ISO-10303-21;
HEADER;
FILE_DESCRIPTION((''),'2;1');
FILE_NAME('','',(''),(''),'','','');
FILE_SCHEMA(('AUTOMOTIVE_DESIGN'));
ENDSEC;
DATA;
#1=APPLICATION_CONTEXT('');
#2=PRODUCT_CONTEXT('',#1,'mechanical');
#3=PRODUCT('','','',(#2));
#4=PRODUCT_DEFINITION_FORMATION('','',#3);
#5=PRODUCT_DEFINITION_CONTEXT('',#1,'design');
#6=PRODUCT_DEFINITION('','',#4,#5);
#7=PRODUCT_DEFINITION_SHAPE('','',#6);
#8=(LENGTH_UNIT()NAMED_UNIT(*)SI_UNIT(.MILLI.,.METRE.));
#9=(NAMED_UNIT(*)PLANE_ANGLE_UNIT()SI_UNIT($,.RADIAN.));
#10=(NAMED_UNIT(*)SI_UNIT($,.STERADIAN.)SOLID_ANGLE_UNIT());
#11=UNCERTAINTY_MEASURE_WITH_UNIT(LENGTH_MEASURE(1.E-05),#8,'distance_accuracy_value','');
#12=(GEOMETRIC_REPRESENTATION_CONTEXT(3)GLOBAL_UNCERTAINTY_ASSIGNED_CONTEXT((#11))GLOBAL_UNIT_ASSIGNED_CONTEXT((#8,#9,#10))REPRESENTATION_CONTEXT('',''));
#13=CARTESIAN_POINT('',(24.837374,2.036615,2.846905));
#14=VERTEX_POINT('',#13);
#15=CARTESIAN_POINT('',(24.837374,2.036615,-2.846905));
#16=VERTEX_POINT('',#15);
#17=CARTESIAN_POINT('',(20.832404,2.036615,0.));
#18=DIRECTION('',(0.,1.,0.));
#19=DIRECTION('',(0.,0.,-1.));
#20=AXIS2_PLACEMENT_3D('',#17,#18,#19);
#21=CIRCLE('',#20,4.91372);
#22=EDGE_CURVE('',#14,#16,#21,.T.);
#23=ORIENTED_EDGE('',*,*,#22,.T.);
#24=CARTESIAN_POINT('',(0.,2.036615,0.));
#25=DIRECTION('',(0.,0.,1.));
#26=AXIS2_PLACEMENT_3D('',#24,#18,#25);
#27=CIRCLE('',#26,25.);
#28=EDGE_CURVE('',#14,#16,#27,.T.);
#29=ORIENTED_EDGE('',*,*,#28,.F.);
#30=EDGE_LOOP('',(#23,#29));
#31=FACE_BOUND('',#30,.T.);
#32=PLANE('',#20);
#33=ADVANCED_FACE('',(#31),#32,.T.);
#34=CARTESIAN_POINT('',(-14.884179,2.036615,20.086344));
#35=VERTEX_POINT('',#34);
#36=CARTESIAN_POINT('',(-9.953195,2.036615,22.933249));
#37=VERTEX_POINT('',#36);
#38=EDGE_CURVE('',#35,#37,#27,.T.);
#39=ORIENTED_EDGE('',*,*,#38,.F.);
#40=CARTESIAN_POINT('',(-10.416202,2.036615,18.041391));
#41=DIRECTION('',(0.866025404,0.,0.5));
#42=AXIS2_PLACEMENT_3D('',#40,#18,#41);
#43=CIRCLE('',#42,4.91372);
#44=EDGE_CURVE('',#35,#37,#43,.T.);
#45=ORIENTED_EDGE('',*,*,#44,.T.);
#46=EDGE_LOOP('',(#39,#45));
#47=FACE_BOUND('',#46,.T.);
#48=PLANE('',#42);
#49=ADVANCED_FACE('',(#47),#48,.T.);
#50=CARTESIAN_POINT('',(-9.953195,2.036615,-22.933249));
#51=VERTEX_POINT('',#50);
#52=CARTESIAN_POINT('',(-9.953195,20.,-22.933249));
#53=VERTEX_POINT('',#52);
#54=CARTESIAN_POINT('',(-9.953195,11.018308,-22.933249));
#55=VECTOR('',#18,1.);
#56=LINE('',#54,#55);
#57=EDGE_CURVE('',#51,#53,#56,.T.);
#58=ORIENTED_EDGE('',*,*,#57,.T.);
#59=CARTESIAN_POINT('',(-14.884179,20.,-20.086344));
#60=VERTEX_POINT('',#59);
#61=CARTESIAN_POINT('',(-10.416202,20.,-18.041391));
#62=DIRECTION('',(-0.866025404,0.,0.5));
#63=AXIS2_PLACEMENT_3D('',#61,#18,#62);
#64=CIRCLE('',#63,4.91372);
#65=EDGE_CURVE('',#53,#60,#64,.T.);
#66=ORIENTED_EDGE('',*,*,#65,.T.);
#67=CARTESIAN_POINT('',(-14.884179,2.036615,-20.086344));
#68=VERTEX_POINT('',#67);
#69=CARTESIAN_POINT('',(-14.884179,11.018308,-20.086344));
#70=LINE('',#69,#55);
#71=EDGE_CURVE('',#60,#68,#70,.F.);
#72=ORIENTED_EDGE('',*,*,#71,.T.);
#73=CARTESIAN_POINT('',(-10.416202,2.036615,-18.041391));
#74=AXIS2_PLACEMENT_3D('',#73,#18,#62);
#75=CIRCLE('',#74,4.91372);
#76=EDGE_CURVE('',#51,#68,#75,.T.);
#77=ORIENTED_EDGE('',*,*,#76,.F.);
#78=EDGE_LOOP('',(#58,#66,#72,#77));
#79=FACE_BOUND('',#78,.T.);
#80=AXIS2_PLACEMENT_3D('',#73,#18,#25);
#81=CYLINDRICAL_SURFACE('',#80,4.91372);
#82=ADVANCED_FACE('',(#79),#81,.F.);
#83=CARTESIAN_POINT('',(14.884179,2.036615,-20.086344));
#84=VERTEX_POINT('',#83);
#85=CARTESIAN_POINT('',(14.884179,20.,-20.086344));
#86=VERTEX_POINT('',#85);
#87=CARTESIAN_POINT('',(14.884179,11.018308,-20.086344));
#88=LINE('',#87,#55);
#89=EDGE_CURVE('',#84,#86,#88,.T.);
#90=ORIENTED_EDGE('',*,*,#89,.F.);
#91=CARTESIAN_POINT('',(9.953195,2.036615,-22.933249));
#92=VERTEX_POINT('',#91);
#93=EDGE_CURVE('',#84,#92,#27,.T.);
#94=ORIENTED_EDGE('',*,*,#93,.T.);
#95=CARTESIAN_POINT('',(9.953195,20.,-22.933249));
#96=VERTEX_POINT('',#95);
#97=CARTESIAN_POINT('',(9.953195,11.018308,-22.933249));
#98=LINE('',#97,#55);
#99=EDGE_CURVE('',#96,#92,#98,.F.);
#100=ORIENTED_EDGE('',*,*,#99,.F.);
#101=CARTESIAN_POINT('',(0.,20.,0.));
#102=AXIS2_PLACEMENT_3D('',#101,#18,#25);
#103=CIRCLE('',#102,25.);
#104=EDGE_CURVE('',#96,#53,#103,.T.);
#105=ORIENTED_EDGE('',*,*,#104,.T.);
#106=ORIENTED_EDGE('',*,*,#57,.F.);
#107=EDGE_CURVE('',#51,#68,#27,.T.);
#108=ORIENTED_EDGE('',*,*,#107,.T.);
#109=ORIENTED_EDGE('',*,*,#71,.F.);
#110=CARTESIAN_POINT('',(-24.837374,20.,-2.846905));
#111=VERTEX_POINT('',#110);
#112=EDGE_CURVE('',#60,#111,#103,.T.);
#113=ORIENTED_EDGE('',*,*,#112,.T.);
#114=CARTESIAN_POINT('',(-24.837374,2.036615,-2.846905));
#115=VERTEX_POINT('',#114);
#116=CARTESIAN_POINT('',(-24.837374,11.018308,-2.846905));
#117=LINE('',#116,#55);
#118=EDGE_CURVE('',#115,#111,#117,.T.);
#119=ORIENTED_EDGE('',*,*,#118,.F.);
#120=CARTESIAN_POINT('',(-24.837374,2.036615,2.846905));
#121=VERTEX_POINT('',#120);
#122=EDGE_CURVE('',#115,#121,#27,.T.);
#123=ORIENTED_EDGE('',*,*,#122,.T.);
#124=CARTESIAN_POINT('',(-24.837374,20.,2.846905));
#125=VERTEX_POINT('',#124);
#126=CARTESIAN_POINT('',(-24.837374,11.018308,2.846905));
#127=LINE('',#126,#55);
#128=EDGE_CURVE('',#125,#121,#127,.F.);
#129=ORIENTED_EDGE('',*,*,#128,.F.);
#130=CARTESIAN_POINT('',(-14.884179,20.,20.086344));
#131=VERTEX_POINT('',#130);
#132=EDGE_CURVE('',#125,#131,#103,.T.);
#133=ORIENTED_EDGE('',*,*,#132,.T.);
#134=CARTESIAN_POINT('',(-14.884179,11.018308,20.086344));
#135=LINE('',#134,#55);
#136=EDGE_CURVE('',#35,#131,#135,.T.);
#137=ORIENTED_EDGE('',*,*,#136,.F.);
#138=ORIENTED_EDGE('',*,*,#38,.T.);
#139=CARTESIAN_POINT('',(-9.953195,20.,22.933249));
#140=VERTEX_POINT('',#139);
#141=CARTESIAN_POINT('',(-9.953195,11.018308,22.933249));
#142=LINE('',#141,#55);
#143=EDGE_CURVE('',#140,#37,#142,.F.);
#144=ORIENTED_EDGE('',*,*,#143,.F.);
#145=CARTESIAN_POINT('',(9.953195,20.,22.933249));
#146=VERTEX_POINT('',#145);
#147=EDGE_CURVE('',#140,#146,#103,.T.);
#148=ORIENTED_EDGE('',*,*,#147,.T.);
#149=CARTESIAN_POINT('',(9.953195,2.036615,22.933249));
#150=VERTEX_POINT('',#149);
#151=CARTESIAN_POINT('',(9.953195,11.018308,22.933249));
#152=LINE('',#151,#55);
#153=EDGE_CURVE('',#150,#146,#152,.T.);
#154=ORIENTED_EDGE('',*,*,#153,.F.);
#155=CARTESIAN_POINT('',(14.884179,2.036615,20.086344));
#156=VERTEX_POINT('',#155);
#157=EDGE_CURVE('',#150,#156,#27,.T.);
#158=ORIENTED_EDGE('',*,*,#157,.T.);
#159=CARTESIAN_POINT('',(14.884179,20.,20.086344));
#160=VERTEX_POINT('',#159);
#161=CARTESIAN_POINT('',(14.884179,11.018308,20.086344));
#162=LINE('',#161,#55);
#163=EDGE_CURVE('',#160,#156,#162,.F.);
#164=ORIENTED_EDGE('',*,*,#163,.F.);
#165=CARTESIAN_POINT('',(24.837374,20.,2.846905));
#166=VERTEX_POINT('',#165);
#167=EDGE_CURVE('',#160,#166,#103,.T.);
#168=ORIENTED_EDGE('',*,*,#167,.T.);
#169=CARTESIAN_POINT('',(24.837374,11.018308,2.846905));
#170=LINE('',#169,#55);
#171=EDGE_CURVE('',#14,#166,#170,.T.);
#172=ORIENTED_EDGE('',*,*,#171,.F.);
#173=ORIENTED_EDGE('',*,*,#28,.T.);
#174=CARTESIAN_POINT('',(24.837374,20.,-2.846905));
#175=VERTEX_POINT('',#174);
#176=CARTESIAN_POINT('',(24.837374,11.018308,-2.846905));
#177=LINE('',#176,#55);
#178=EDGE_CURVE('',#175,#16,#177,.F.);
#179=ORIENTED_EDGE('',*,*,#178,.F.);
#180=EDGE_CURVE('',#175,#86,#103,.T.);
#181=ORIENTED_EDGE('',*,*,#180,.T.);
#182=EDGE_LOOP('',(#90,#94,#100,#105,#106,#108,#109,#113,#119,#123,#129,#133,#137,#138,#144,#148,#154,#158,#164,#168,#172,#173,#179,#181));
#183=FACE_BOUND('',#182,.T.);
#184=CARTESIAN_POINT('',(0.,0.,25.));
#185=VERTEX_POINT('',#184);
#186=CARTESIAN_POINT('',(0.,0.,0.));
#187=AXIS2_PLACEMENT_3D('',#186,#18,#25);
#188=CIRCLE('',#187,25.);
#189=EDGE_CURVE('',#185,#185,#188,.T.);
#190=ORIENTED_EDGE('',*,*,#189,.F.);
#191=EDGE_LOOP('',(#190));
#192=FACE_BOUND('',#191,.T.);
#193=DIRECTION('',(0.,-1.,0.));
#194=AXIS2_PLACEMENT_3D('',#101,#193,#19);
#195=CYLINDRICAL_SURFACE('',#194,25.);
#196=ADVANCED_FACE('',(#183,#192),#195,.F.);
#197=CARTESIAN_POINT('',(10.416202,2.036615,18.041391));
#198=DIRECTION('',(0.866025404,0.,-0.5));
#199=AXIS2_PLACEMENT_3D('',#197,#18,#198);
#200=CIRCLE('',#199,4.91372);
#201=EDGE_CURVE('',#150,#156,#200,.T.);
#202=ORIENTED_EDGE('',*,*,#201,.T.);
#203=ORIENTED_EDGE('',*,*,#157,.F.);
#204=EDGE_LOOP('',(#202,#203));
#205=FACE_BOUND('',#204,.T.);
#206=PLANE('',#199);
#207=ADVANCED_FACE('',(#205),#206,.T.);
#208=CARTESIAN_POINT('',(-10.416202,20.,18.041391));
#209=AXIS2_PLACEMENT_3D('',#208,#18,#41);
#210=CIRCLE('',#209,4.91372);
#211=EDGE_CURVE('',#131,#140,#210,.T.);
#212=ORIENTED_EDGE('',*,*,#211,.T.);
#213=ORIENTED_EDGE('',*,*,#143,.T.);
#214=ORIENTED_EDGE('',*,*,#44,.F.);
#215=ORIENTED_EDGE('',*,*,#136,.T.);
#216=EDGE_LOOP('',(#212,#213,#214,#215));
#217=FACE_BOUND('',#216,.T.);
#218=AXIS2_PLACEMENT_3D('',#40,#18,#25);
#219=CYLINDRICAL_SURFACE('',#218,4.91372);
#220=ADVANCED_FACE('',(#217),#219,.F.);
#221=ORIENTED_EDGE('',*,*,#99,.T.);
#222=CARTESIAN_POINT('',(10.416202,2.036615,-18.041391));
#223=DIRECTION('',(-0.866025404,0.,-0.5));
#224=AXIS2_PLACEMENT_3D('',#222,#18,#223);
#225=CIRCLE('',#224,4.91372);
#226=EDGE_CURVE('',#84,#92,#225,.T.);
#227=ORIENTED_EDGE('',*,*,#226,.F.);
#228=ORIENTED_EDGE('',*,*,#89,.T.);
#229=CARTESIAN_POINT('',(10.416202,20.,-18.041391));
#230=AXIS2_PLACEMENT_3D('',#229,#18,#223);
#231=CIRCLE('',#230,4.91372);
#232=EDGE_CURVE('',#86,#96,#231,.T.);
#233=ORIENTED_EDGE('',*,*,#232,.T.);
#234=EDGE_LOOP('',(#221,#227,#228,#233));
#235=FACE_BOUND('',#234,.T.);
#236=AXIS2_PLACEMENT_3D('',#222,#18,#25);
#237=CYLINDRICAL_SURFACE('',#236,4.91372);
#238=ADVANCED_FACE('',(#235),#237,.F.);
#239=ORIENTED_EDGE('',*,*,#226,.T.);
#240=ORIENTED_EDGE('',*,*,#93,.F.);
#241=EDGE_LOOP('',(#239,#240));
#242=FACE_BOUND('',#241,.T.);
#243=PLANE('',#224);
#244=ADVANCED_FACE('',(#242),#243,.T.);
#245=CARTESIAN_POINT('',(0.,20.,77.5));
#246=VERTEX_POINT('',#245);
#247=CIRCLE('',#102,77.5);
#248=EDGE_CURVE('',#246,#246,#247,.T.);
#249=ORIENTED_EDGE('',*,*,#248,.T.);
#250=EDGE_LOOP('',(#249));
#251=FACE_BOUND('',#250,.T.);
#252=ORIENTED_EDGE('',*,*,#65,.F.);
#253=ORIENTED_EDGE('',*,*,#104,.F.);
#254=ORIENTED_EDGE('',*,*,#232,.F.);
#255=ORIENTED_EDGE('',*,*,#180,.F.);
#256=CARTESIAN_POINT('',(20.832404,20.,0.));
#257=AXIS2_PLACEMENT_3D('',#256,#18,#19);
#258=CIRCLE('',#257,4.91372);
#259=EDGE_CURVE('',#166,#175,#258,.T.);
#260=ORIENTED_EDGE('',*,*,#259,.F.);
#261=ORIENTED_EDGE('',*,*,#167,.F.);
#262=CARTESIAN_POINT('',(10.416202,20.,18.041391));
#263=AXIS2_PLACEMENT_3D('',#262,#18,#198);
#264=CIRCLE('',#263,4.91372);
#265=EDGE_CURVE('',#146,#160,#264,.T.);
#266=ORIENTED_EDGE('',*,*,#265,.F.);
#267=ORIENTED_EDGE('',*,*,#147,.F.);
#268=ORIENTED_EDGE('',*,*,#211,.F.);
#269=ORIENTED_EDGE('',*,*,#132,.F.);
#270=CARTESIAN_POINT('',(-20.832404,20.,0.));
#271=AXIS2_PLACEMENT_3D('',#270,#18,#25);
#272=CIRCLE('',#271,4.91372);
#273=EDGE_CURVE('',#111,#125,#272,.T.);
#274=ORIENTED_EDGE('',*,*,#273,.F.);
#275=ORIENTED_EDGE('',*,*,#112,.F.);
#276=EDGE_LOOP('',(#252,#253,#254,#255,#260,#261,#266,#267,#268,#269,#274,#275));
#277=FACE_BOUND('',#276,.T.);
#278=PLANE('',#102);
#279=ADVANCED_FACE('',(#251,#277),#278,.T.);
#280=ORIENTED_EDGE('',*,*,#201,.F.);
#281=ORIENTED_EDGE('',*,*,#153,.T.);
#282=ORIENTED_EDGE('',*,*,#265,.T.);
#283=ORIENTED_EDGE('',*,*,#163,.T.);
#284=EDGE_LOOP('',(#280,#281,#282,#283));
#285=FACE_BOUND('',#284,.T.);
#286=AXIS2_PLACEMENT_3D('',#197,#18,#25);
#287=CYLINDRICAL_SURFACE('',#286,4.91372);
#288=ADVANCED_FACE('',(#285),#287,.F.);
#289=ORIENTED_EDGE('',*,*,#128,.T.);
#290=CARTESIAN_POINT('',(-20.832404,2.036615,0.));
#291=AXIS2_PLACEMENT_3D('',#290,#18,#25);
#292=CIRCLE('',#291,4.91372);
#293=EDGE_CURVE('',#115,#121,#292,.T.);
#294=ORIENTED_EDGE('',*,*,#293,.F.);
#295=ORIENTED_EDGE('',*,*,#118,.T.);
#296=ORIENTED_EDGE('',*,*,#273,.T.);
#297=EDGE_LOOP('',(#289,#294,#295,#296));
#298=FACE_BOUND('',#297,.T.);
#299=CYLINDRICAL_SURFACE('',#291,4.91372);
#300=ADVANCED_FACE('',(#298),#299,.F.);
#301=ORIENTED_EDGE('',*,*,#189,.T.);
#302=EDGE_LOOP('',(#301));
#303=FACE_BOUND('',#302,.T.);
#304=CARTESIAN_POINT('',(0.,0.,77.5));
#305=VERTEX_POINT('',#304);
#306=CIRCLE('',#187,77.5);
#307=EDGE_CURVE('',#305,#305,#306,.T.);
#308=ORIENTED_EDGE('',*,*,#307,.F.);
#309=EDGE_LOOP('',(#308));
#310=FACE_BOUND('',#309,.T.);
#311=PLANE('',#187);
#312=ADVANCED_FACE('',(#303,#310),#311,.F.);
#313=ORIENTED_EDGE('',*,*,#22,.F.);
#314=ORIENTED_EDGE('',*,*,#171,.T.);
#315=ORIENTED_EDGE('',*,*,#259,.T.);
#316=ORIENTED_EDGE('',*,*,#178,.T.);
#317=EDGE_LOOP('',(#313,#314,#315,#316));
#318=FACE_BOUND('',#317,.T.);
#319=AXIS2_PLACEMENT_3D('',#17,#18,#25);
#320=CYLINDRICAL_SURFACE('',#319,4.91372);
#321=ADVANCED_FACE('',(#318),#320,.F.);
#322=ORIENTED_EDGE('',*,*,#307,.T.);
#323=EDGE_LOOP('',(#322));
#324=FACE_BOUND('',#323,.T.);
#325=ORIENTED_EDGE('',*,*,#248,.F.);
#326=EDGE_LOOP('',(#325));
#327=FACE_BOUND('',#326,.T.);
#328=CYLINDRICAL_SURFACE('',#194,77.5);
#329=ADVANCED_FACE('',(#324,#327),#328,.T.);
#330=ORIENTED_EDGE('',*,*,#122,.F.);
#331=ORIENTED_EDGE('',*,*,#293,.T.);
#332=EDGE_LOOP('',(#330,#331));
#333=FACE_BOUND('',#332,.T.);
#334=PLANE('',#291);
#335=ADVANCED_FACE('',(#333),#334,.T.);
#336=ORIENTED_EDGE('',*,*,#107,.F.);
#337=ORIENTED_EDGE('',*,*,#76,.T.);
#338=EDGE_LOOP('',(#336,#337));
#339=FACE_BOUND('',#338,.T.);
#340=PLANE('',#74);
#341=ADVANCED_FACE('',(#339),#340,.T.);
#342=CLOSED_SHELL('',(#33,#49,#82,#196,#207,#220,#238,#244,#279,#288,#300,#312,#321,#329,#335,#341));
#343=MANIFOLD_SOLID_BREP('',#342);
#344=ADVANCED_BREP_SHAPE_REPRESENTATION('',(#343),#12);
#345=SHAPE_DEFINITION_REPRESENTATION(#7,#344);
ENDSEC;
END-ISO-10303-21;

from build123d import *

# Parameters (mm, degrees)
SKETCH1_R           = 77.5
BOSS_EXTRUDE1_DEPTH = 20
SKETCH2_R           = 25
CUT_EXTRUDE1_DEPTH  = 112.411399776
SKETCH3_R           = 4.913720214
CUT_EXTRUDE2_DEPTH  = 17.96338487
CIRPATTERN1_COUNT   = 6


with BuildPart() as part:
    # Sketch1 → Boss-Extrude1 (new body)
    with BuildSketch(Plane(origin=(0, 0, 0), x_dir=(1, 0, 0), z_dir=(0, 1, 0))):
        Circle(SKETCH1_R)
    extrude(amount=BOSS_EXTRUDE1_DEPTH)

    # Sketch2 → Cut-Extrude1 (cut, through all)
    with BuildSketch(Plane(origin=(0, 0, 0), x_dir=(1, 0, 0), z_dir=(0, 1, 0))):
        Circle(SKETCH2_R)
    extrude(amount=CUT_EXTRUDE1_DEPTH, mode=Mode.SUBTRACT)

    # Sketch3 → Cut-Extrude2 (cut)
    with BuildSketch(Plane(origin=(0, 20, 0), x_dir=(1, 0, 0), z_dir=(0, 1, 0))):
        with Locations((-20.8324043, 0)):
            Circle(SKETCH3_R)
    cut_extrude2 = extrude(amount=-CUT_EXTRUDE2_DEPTH, mode=Mode.SUBTRACT)

    # CirPattern1: Cut-Extrude2 ×6 about axis
    cirpattern1_axis = Axis((0, 0, 0), (0, 1, 0))
    for i in range(1, CIRPATTERN1_COUNT):
        add(cut_extrude2.rotate(cirpattern1_axis, i * 360 / CIRPATTERN1_COUNT), mode=Mode.SUBTRACT)


solid = part.part
